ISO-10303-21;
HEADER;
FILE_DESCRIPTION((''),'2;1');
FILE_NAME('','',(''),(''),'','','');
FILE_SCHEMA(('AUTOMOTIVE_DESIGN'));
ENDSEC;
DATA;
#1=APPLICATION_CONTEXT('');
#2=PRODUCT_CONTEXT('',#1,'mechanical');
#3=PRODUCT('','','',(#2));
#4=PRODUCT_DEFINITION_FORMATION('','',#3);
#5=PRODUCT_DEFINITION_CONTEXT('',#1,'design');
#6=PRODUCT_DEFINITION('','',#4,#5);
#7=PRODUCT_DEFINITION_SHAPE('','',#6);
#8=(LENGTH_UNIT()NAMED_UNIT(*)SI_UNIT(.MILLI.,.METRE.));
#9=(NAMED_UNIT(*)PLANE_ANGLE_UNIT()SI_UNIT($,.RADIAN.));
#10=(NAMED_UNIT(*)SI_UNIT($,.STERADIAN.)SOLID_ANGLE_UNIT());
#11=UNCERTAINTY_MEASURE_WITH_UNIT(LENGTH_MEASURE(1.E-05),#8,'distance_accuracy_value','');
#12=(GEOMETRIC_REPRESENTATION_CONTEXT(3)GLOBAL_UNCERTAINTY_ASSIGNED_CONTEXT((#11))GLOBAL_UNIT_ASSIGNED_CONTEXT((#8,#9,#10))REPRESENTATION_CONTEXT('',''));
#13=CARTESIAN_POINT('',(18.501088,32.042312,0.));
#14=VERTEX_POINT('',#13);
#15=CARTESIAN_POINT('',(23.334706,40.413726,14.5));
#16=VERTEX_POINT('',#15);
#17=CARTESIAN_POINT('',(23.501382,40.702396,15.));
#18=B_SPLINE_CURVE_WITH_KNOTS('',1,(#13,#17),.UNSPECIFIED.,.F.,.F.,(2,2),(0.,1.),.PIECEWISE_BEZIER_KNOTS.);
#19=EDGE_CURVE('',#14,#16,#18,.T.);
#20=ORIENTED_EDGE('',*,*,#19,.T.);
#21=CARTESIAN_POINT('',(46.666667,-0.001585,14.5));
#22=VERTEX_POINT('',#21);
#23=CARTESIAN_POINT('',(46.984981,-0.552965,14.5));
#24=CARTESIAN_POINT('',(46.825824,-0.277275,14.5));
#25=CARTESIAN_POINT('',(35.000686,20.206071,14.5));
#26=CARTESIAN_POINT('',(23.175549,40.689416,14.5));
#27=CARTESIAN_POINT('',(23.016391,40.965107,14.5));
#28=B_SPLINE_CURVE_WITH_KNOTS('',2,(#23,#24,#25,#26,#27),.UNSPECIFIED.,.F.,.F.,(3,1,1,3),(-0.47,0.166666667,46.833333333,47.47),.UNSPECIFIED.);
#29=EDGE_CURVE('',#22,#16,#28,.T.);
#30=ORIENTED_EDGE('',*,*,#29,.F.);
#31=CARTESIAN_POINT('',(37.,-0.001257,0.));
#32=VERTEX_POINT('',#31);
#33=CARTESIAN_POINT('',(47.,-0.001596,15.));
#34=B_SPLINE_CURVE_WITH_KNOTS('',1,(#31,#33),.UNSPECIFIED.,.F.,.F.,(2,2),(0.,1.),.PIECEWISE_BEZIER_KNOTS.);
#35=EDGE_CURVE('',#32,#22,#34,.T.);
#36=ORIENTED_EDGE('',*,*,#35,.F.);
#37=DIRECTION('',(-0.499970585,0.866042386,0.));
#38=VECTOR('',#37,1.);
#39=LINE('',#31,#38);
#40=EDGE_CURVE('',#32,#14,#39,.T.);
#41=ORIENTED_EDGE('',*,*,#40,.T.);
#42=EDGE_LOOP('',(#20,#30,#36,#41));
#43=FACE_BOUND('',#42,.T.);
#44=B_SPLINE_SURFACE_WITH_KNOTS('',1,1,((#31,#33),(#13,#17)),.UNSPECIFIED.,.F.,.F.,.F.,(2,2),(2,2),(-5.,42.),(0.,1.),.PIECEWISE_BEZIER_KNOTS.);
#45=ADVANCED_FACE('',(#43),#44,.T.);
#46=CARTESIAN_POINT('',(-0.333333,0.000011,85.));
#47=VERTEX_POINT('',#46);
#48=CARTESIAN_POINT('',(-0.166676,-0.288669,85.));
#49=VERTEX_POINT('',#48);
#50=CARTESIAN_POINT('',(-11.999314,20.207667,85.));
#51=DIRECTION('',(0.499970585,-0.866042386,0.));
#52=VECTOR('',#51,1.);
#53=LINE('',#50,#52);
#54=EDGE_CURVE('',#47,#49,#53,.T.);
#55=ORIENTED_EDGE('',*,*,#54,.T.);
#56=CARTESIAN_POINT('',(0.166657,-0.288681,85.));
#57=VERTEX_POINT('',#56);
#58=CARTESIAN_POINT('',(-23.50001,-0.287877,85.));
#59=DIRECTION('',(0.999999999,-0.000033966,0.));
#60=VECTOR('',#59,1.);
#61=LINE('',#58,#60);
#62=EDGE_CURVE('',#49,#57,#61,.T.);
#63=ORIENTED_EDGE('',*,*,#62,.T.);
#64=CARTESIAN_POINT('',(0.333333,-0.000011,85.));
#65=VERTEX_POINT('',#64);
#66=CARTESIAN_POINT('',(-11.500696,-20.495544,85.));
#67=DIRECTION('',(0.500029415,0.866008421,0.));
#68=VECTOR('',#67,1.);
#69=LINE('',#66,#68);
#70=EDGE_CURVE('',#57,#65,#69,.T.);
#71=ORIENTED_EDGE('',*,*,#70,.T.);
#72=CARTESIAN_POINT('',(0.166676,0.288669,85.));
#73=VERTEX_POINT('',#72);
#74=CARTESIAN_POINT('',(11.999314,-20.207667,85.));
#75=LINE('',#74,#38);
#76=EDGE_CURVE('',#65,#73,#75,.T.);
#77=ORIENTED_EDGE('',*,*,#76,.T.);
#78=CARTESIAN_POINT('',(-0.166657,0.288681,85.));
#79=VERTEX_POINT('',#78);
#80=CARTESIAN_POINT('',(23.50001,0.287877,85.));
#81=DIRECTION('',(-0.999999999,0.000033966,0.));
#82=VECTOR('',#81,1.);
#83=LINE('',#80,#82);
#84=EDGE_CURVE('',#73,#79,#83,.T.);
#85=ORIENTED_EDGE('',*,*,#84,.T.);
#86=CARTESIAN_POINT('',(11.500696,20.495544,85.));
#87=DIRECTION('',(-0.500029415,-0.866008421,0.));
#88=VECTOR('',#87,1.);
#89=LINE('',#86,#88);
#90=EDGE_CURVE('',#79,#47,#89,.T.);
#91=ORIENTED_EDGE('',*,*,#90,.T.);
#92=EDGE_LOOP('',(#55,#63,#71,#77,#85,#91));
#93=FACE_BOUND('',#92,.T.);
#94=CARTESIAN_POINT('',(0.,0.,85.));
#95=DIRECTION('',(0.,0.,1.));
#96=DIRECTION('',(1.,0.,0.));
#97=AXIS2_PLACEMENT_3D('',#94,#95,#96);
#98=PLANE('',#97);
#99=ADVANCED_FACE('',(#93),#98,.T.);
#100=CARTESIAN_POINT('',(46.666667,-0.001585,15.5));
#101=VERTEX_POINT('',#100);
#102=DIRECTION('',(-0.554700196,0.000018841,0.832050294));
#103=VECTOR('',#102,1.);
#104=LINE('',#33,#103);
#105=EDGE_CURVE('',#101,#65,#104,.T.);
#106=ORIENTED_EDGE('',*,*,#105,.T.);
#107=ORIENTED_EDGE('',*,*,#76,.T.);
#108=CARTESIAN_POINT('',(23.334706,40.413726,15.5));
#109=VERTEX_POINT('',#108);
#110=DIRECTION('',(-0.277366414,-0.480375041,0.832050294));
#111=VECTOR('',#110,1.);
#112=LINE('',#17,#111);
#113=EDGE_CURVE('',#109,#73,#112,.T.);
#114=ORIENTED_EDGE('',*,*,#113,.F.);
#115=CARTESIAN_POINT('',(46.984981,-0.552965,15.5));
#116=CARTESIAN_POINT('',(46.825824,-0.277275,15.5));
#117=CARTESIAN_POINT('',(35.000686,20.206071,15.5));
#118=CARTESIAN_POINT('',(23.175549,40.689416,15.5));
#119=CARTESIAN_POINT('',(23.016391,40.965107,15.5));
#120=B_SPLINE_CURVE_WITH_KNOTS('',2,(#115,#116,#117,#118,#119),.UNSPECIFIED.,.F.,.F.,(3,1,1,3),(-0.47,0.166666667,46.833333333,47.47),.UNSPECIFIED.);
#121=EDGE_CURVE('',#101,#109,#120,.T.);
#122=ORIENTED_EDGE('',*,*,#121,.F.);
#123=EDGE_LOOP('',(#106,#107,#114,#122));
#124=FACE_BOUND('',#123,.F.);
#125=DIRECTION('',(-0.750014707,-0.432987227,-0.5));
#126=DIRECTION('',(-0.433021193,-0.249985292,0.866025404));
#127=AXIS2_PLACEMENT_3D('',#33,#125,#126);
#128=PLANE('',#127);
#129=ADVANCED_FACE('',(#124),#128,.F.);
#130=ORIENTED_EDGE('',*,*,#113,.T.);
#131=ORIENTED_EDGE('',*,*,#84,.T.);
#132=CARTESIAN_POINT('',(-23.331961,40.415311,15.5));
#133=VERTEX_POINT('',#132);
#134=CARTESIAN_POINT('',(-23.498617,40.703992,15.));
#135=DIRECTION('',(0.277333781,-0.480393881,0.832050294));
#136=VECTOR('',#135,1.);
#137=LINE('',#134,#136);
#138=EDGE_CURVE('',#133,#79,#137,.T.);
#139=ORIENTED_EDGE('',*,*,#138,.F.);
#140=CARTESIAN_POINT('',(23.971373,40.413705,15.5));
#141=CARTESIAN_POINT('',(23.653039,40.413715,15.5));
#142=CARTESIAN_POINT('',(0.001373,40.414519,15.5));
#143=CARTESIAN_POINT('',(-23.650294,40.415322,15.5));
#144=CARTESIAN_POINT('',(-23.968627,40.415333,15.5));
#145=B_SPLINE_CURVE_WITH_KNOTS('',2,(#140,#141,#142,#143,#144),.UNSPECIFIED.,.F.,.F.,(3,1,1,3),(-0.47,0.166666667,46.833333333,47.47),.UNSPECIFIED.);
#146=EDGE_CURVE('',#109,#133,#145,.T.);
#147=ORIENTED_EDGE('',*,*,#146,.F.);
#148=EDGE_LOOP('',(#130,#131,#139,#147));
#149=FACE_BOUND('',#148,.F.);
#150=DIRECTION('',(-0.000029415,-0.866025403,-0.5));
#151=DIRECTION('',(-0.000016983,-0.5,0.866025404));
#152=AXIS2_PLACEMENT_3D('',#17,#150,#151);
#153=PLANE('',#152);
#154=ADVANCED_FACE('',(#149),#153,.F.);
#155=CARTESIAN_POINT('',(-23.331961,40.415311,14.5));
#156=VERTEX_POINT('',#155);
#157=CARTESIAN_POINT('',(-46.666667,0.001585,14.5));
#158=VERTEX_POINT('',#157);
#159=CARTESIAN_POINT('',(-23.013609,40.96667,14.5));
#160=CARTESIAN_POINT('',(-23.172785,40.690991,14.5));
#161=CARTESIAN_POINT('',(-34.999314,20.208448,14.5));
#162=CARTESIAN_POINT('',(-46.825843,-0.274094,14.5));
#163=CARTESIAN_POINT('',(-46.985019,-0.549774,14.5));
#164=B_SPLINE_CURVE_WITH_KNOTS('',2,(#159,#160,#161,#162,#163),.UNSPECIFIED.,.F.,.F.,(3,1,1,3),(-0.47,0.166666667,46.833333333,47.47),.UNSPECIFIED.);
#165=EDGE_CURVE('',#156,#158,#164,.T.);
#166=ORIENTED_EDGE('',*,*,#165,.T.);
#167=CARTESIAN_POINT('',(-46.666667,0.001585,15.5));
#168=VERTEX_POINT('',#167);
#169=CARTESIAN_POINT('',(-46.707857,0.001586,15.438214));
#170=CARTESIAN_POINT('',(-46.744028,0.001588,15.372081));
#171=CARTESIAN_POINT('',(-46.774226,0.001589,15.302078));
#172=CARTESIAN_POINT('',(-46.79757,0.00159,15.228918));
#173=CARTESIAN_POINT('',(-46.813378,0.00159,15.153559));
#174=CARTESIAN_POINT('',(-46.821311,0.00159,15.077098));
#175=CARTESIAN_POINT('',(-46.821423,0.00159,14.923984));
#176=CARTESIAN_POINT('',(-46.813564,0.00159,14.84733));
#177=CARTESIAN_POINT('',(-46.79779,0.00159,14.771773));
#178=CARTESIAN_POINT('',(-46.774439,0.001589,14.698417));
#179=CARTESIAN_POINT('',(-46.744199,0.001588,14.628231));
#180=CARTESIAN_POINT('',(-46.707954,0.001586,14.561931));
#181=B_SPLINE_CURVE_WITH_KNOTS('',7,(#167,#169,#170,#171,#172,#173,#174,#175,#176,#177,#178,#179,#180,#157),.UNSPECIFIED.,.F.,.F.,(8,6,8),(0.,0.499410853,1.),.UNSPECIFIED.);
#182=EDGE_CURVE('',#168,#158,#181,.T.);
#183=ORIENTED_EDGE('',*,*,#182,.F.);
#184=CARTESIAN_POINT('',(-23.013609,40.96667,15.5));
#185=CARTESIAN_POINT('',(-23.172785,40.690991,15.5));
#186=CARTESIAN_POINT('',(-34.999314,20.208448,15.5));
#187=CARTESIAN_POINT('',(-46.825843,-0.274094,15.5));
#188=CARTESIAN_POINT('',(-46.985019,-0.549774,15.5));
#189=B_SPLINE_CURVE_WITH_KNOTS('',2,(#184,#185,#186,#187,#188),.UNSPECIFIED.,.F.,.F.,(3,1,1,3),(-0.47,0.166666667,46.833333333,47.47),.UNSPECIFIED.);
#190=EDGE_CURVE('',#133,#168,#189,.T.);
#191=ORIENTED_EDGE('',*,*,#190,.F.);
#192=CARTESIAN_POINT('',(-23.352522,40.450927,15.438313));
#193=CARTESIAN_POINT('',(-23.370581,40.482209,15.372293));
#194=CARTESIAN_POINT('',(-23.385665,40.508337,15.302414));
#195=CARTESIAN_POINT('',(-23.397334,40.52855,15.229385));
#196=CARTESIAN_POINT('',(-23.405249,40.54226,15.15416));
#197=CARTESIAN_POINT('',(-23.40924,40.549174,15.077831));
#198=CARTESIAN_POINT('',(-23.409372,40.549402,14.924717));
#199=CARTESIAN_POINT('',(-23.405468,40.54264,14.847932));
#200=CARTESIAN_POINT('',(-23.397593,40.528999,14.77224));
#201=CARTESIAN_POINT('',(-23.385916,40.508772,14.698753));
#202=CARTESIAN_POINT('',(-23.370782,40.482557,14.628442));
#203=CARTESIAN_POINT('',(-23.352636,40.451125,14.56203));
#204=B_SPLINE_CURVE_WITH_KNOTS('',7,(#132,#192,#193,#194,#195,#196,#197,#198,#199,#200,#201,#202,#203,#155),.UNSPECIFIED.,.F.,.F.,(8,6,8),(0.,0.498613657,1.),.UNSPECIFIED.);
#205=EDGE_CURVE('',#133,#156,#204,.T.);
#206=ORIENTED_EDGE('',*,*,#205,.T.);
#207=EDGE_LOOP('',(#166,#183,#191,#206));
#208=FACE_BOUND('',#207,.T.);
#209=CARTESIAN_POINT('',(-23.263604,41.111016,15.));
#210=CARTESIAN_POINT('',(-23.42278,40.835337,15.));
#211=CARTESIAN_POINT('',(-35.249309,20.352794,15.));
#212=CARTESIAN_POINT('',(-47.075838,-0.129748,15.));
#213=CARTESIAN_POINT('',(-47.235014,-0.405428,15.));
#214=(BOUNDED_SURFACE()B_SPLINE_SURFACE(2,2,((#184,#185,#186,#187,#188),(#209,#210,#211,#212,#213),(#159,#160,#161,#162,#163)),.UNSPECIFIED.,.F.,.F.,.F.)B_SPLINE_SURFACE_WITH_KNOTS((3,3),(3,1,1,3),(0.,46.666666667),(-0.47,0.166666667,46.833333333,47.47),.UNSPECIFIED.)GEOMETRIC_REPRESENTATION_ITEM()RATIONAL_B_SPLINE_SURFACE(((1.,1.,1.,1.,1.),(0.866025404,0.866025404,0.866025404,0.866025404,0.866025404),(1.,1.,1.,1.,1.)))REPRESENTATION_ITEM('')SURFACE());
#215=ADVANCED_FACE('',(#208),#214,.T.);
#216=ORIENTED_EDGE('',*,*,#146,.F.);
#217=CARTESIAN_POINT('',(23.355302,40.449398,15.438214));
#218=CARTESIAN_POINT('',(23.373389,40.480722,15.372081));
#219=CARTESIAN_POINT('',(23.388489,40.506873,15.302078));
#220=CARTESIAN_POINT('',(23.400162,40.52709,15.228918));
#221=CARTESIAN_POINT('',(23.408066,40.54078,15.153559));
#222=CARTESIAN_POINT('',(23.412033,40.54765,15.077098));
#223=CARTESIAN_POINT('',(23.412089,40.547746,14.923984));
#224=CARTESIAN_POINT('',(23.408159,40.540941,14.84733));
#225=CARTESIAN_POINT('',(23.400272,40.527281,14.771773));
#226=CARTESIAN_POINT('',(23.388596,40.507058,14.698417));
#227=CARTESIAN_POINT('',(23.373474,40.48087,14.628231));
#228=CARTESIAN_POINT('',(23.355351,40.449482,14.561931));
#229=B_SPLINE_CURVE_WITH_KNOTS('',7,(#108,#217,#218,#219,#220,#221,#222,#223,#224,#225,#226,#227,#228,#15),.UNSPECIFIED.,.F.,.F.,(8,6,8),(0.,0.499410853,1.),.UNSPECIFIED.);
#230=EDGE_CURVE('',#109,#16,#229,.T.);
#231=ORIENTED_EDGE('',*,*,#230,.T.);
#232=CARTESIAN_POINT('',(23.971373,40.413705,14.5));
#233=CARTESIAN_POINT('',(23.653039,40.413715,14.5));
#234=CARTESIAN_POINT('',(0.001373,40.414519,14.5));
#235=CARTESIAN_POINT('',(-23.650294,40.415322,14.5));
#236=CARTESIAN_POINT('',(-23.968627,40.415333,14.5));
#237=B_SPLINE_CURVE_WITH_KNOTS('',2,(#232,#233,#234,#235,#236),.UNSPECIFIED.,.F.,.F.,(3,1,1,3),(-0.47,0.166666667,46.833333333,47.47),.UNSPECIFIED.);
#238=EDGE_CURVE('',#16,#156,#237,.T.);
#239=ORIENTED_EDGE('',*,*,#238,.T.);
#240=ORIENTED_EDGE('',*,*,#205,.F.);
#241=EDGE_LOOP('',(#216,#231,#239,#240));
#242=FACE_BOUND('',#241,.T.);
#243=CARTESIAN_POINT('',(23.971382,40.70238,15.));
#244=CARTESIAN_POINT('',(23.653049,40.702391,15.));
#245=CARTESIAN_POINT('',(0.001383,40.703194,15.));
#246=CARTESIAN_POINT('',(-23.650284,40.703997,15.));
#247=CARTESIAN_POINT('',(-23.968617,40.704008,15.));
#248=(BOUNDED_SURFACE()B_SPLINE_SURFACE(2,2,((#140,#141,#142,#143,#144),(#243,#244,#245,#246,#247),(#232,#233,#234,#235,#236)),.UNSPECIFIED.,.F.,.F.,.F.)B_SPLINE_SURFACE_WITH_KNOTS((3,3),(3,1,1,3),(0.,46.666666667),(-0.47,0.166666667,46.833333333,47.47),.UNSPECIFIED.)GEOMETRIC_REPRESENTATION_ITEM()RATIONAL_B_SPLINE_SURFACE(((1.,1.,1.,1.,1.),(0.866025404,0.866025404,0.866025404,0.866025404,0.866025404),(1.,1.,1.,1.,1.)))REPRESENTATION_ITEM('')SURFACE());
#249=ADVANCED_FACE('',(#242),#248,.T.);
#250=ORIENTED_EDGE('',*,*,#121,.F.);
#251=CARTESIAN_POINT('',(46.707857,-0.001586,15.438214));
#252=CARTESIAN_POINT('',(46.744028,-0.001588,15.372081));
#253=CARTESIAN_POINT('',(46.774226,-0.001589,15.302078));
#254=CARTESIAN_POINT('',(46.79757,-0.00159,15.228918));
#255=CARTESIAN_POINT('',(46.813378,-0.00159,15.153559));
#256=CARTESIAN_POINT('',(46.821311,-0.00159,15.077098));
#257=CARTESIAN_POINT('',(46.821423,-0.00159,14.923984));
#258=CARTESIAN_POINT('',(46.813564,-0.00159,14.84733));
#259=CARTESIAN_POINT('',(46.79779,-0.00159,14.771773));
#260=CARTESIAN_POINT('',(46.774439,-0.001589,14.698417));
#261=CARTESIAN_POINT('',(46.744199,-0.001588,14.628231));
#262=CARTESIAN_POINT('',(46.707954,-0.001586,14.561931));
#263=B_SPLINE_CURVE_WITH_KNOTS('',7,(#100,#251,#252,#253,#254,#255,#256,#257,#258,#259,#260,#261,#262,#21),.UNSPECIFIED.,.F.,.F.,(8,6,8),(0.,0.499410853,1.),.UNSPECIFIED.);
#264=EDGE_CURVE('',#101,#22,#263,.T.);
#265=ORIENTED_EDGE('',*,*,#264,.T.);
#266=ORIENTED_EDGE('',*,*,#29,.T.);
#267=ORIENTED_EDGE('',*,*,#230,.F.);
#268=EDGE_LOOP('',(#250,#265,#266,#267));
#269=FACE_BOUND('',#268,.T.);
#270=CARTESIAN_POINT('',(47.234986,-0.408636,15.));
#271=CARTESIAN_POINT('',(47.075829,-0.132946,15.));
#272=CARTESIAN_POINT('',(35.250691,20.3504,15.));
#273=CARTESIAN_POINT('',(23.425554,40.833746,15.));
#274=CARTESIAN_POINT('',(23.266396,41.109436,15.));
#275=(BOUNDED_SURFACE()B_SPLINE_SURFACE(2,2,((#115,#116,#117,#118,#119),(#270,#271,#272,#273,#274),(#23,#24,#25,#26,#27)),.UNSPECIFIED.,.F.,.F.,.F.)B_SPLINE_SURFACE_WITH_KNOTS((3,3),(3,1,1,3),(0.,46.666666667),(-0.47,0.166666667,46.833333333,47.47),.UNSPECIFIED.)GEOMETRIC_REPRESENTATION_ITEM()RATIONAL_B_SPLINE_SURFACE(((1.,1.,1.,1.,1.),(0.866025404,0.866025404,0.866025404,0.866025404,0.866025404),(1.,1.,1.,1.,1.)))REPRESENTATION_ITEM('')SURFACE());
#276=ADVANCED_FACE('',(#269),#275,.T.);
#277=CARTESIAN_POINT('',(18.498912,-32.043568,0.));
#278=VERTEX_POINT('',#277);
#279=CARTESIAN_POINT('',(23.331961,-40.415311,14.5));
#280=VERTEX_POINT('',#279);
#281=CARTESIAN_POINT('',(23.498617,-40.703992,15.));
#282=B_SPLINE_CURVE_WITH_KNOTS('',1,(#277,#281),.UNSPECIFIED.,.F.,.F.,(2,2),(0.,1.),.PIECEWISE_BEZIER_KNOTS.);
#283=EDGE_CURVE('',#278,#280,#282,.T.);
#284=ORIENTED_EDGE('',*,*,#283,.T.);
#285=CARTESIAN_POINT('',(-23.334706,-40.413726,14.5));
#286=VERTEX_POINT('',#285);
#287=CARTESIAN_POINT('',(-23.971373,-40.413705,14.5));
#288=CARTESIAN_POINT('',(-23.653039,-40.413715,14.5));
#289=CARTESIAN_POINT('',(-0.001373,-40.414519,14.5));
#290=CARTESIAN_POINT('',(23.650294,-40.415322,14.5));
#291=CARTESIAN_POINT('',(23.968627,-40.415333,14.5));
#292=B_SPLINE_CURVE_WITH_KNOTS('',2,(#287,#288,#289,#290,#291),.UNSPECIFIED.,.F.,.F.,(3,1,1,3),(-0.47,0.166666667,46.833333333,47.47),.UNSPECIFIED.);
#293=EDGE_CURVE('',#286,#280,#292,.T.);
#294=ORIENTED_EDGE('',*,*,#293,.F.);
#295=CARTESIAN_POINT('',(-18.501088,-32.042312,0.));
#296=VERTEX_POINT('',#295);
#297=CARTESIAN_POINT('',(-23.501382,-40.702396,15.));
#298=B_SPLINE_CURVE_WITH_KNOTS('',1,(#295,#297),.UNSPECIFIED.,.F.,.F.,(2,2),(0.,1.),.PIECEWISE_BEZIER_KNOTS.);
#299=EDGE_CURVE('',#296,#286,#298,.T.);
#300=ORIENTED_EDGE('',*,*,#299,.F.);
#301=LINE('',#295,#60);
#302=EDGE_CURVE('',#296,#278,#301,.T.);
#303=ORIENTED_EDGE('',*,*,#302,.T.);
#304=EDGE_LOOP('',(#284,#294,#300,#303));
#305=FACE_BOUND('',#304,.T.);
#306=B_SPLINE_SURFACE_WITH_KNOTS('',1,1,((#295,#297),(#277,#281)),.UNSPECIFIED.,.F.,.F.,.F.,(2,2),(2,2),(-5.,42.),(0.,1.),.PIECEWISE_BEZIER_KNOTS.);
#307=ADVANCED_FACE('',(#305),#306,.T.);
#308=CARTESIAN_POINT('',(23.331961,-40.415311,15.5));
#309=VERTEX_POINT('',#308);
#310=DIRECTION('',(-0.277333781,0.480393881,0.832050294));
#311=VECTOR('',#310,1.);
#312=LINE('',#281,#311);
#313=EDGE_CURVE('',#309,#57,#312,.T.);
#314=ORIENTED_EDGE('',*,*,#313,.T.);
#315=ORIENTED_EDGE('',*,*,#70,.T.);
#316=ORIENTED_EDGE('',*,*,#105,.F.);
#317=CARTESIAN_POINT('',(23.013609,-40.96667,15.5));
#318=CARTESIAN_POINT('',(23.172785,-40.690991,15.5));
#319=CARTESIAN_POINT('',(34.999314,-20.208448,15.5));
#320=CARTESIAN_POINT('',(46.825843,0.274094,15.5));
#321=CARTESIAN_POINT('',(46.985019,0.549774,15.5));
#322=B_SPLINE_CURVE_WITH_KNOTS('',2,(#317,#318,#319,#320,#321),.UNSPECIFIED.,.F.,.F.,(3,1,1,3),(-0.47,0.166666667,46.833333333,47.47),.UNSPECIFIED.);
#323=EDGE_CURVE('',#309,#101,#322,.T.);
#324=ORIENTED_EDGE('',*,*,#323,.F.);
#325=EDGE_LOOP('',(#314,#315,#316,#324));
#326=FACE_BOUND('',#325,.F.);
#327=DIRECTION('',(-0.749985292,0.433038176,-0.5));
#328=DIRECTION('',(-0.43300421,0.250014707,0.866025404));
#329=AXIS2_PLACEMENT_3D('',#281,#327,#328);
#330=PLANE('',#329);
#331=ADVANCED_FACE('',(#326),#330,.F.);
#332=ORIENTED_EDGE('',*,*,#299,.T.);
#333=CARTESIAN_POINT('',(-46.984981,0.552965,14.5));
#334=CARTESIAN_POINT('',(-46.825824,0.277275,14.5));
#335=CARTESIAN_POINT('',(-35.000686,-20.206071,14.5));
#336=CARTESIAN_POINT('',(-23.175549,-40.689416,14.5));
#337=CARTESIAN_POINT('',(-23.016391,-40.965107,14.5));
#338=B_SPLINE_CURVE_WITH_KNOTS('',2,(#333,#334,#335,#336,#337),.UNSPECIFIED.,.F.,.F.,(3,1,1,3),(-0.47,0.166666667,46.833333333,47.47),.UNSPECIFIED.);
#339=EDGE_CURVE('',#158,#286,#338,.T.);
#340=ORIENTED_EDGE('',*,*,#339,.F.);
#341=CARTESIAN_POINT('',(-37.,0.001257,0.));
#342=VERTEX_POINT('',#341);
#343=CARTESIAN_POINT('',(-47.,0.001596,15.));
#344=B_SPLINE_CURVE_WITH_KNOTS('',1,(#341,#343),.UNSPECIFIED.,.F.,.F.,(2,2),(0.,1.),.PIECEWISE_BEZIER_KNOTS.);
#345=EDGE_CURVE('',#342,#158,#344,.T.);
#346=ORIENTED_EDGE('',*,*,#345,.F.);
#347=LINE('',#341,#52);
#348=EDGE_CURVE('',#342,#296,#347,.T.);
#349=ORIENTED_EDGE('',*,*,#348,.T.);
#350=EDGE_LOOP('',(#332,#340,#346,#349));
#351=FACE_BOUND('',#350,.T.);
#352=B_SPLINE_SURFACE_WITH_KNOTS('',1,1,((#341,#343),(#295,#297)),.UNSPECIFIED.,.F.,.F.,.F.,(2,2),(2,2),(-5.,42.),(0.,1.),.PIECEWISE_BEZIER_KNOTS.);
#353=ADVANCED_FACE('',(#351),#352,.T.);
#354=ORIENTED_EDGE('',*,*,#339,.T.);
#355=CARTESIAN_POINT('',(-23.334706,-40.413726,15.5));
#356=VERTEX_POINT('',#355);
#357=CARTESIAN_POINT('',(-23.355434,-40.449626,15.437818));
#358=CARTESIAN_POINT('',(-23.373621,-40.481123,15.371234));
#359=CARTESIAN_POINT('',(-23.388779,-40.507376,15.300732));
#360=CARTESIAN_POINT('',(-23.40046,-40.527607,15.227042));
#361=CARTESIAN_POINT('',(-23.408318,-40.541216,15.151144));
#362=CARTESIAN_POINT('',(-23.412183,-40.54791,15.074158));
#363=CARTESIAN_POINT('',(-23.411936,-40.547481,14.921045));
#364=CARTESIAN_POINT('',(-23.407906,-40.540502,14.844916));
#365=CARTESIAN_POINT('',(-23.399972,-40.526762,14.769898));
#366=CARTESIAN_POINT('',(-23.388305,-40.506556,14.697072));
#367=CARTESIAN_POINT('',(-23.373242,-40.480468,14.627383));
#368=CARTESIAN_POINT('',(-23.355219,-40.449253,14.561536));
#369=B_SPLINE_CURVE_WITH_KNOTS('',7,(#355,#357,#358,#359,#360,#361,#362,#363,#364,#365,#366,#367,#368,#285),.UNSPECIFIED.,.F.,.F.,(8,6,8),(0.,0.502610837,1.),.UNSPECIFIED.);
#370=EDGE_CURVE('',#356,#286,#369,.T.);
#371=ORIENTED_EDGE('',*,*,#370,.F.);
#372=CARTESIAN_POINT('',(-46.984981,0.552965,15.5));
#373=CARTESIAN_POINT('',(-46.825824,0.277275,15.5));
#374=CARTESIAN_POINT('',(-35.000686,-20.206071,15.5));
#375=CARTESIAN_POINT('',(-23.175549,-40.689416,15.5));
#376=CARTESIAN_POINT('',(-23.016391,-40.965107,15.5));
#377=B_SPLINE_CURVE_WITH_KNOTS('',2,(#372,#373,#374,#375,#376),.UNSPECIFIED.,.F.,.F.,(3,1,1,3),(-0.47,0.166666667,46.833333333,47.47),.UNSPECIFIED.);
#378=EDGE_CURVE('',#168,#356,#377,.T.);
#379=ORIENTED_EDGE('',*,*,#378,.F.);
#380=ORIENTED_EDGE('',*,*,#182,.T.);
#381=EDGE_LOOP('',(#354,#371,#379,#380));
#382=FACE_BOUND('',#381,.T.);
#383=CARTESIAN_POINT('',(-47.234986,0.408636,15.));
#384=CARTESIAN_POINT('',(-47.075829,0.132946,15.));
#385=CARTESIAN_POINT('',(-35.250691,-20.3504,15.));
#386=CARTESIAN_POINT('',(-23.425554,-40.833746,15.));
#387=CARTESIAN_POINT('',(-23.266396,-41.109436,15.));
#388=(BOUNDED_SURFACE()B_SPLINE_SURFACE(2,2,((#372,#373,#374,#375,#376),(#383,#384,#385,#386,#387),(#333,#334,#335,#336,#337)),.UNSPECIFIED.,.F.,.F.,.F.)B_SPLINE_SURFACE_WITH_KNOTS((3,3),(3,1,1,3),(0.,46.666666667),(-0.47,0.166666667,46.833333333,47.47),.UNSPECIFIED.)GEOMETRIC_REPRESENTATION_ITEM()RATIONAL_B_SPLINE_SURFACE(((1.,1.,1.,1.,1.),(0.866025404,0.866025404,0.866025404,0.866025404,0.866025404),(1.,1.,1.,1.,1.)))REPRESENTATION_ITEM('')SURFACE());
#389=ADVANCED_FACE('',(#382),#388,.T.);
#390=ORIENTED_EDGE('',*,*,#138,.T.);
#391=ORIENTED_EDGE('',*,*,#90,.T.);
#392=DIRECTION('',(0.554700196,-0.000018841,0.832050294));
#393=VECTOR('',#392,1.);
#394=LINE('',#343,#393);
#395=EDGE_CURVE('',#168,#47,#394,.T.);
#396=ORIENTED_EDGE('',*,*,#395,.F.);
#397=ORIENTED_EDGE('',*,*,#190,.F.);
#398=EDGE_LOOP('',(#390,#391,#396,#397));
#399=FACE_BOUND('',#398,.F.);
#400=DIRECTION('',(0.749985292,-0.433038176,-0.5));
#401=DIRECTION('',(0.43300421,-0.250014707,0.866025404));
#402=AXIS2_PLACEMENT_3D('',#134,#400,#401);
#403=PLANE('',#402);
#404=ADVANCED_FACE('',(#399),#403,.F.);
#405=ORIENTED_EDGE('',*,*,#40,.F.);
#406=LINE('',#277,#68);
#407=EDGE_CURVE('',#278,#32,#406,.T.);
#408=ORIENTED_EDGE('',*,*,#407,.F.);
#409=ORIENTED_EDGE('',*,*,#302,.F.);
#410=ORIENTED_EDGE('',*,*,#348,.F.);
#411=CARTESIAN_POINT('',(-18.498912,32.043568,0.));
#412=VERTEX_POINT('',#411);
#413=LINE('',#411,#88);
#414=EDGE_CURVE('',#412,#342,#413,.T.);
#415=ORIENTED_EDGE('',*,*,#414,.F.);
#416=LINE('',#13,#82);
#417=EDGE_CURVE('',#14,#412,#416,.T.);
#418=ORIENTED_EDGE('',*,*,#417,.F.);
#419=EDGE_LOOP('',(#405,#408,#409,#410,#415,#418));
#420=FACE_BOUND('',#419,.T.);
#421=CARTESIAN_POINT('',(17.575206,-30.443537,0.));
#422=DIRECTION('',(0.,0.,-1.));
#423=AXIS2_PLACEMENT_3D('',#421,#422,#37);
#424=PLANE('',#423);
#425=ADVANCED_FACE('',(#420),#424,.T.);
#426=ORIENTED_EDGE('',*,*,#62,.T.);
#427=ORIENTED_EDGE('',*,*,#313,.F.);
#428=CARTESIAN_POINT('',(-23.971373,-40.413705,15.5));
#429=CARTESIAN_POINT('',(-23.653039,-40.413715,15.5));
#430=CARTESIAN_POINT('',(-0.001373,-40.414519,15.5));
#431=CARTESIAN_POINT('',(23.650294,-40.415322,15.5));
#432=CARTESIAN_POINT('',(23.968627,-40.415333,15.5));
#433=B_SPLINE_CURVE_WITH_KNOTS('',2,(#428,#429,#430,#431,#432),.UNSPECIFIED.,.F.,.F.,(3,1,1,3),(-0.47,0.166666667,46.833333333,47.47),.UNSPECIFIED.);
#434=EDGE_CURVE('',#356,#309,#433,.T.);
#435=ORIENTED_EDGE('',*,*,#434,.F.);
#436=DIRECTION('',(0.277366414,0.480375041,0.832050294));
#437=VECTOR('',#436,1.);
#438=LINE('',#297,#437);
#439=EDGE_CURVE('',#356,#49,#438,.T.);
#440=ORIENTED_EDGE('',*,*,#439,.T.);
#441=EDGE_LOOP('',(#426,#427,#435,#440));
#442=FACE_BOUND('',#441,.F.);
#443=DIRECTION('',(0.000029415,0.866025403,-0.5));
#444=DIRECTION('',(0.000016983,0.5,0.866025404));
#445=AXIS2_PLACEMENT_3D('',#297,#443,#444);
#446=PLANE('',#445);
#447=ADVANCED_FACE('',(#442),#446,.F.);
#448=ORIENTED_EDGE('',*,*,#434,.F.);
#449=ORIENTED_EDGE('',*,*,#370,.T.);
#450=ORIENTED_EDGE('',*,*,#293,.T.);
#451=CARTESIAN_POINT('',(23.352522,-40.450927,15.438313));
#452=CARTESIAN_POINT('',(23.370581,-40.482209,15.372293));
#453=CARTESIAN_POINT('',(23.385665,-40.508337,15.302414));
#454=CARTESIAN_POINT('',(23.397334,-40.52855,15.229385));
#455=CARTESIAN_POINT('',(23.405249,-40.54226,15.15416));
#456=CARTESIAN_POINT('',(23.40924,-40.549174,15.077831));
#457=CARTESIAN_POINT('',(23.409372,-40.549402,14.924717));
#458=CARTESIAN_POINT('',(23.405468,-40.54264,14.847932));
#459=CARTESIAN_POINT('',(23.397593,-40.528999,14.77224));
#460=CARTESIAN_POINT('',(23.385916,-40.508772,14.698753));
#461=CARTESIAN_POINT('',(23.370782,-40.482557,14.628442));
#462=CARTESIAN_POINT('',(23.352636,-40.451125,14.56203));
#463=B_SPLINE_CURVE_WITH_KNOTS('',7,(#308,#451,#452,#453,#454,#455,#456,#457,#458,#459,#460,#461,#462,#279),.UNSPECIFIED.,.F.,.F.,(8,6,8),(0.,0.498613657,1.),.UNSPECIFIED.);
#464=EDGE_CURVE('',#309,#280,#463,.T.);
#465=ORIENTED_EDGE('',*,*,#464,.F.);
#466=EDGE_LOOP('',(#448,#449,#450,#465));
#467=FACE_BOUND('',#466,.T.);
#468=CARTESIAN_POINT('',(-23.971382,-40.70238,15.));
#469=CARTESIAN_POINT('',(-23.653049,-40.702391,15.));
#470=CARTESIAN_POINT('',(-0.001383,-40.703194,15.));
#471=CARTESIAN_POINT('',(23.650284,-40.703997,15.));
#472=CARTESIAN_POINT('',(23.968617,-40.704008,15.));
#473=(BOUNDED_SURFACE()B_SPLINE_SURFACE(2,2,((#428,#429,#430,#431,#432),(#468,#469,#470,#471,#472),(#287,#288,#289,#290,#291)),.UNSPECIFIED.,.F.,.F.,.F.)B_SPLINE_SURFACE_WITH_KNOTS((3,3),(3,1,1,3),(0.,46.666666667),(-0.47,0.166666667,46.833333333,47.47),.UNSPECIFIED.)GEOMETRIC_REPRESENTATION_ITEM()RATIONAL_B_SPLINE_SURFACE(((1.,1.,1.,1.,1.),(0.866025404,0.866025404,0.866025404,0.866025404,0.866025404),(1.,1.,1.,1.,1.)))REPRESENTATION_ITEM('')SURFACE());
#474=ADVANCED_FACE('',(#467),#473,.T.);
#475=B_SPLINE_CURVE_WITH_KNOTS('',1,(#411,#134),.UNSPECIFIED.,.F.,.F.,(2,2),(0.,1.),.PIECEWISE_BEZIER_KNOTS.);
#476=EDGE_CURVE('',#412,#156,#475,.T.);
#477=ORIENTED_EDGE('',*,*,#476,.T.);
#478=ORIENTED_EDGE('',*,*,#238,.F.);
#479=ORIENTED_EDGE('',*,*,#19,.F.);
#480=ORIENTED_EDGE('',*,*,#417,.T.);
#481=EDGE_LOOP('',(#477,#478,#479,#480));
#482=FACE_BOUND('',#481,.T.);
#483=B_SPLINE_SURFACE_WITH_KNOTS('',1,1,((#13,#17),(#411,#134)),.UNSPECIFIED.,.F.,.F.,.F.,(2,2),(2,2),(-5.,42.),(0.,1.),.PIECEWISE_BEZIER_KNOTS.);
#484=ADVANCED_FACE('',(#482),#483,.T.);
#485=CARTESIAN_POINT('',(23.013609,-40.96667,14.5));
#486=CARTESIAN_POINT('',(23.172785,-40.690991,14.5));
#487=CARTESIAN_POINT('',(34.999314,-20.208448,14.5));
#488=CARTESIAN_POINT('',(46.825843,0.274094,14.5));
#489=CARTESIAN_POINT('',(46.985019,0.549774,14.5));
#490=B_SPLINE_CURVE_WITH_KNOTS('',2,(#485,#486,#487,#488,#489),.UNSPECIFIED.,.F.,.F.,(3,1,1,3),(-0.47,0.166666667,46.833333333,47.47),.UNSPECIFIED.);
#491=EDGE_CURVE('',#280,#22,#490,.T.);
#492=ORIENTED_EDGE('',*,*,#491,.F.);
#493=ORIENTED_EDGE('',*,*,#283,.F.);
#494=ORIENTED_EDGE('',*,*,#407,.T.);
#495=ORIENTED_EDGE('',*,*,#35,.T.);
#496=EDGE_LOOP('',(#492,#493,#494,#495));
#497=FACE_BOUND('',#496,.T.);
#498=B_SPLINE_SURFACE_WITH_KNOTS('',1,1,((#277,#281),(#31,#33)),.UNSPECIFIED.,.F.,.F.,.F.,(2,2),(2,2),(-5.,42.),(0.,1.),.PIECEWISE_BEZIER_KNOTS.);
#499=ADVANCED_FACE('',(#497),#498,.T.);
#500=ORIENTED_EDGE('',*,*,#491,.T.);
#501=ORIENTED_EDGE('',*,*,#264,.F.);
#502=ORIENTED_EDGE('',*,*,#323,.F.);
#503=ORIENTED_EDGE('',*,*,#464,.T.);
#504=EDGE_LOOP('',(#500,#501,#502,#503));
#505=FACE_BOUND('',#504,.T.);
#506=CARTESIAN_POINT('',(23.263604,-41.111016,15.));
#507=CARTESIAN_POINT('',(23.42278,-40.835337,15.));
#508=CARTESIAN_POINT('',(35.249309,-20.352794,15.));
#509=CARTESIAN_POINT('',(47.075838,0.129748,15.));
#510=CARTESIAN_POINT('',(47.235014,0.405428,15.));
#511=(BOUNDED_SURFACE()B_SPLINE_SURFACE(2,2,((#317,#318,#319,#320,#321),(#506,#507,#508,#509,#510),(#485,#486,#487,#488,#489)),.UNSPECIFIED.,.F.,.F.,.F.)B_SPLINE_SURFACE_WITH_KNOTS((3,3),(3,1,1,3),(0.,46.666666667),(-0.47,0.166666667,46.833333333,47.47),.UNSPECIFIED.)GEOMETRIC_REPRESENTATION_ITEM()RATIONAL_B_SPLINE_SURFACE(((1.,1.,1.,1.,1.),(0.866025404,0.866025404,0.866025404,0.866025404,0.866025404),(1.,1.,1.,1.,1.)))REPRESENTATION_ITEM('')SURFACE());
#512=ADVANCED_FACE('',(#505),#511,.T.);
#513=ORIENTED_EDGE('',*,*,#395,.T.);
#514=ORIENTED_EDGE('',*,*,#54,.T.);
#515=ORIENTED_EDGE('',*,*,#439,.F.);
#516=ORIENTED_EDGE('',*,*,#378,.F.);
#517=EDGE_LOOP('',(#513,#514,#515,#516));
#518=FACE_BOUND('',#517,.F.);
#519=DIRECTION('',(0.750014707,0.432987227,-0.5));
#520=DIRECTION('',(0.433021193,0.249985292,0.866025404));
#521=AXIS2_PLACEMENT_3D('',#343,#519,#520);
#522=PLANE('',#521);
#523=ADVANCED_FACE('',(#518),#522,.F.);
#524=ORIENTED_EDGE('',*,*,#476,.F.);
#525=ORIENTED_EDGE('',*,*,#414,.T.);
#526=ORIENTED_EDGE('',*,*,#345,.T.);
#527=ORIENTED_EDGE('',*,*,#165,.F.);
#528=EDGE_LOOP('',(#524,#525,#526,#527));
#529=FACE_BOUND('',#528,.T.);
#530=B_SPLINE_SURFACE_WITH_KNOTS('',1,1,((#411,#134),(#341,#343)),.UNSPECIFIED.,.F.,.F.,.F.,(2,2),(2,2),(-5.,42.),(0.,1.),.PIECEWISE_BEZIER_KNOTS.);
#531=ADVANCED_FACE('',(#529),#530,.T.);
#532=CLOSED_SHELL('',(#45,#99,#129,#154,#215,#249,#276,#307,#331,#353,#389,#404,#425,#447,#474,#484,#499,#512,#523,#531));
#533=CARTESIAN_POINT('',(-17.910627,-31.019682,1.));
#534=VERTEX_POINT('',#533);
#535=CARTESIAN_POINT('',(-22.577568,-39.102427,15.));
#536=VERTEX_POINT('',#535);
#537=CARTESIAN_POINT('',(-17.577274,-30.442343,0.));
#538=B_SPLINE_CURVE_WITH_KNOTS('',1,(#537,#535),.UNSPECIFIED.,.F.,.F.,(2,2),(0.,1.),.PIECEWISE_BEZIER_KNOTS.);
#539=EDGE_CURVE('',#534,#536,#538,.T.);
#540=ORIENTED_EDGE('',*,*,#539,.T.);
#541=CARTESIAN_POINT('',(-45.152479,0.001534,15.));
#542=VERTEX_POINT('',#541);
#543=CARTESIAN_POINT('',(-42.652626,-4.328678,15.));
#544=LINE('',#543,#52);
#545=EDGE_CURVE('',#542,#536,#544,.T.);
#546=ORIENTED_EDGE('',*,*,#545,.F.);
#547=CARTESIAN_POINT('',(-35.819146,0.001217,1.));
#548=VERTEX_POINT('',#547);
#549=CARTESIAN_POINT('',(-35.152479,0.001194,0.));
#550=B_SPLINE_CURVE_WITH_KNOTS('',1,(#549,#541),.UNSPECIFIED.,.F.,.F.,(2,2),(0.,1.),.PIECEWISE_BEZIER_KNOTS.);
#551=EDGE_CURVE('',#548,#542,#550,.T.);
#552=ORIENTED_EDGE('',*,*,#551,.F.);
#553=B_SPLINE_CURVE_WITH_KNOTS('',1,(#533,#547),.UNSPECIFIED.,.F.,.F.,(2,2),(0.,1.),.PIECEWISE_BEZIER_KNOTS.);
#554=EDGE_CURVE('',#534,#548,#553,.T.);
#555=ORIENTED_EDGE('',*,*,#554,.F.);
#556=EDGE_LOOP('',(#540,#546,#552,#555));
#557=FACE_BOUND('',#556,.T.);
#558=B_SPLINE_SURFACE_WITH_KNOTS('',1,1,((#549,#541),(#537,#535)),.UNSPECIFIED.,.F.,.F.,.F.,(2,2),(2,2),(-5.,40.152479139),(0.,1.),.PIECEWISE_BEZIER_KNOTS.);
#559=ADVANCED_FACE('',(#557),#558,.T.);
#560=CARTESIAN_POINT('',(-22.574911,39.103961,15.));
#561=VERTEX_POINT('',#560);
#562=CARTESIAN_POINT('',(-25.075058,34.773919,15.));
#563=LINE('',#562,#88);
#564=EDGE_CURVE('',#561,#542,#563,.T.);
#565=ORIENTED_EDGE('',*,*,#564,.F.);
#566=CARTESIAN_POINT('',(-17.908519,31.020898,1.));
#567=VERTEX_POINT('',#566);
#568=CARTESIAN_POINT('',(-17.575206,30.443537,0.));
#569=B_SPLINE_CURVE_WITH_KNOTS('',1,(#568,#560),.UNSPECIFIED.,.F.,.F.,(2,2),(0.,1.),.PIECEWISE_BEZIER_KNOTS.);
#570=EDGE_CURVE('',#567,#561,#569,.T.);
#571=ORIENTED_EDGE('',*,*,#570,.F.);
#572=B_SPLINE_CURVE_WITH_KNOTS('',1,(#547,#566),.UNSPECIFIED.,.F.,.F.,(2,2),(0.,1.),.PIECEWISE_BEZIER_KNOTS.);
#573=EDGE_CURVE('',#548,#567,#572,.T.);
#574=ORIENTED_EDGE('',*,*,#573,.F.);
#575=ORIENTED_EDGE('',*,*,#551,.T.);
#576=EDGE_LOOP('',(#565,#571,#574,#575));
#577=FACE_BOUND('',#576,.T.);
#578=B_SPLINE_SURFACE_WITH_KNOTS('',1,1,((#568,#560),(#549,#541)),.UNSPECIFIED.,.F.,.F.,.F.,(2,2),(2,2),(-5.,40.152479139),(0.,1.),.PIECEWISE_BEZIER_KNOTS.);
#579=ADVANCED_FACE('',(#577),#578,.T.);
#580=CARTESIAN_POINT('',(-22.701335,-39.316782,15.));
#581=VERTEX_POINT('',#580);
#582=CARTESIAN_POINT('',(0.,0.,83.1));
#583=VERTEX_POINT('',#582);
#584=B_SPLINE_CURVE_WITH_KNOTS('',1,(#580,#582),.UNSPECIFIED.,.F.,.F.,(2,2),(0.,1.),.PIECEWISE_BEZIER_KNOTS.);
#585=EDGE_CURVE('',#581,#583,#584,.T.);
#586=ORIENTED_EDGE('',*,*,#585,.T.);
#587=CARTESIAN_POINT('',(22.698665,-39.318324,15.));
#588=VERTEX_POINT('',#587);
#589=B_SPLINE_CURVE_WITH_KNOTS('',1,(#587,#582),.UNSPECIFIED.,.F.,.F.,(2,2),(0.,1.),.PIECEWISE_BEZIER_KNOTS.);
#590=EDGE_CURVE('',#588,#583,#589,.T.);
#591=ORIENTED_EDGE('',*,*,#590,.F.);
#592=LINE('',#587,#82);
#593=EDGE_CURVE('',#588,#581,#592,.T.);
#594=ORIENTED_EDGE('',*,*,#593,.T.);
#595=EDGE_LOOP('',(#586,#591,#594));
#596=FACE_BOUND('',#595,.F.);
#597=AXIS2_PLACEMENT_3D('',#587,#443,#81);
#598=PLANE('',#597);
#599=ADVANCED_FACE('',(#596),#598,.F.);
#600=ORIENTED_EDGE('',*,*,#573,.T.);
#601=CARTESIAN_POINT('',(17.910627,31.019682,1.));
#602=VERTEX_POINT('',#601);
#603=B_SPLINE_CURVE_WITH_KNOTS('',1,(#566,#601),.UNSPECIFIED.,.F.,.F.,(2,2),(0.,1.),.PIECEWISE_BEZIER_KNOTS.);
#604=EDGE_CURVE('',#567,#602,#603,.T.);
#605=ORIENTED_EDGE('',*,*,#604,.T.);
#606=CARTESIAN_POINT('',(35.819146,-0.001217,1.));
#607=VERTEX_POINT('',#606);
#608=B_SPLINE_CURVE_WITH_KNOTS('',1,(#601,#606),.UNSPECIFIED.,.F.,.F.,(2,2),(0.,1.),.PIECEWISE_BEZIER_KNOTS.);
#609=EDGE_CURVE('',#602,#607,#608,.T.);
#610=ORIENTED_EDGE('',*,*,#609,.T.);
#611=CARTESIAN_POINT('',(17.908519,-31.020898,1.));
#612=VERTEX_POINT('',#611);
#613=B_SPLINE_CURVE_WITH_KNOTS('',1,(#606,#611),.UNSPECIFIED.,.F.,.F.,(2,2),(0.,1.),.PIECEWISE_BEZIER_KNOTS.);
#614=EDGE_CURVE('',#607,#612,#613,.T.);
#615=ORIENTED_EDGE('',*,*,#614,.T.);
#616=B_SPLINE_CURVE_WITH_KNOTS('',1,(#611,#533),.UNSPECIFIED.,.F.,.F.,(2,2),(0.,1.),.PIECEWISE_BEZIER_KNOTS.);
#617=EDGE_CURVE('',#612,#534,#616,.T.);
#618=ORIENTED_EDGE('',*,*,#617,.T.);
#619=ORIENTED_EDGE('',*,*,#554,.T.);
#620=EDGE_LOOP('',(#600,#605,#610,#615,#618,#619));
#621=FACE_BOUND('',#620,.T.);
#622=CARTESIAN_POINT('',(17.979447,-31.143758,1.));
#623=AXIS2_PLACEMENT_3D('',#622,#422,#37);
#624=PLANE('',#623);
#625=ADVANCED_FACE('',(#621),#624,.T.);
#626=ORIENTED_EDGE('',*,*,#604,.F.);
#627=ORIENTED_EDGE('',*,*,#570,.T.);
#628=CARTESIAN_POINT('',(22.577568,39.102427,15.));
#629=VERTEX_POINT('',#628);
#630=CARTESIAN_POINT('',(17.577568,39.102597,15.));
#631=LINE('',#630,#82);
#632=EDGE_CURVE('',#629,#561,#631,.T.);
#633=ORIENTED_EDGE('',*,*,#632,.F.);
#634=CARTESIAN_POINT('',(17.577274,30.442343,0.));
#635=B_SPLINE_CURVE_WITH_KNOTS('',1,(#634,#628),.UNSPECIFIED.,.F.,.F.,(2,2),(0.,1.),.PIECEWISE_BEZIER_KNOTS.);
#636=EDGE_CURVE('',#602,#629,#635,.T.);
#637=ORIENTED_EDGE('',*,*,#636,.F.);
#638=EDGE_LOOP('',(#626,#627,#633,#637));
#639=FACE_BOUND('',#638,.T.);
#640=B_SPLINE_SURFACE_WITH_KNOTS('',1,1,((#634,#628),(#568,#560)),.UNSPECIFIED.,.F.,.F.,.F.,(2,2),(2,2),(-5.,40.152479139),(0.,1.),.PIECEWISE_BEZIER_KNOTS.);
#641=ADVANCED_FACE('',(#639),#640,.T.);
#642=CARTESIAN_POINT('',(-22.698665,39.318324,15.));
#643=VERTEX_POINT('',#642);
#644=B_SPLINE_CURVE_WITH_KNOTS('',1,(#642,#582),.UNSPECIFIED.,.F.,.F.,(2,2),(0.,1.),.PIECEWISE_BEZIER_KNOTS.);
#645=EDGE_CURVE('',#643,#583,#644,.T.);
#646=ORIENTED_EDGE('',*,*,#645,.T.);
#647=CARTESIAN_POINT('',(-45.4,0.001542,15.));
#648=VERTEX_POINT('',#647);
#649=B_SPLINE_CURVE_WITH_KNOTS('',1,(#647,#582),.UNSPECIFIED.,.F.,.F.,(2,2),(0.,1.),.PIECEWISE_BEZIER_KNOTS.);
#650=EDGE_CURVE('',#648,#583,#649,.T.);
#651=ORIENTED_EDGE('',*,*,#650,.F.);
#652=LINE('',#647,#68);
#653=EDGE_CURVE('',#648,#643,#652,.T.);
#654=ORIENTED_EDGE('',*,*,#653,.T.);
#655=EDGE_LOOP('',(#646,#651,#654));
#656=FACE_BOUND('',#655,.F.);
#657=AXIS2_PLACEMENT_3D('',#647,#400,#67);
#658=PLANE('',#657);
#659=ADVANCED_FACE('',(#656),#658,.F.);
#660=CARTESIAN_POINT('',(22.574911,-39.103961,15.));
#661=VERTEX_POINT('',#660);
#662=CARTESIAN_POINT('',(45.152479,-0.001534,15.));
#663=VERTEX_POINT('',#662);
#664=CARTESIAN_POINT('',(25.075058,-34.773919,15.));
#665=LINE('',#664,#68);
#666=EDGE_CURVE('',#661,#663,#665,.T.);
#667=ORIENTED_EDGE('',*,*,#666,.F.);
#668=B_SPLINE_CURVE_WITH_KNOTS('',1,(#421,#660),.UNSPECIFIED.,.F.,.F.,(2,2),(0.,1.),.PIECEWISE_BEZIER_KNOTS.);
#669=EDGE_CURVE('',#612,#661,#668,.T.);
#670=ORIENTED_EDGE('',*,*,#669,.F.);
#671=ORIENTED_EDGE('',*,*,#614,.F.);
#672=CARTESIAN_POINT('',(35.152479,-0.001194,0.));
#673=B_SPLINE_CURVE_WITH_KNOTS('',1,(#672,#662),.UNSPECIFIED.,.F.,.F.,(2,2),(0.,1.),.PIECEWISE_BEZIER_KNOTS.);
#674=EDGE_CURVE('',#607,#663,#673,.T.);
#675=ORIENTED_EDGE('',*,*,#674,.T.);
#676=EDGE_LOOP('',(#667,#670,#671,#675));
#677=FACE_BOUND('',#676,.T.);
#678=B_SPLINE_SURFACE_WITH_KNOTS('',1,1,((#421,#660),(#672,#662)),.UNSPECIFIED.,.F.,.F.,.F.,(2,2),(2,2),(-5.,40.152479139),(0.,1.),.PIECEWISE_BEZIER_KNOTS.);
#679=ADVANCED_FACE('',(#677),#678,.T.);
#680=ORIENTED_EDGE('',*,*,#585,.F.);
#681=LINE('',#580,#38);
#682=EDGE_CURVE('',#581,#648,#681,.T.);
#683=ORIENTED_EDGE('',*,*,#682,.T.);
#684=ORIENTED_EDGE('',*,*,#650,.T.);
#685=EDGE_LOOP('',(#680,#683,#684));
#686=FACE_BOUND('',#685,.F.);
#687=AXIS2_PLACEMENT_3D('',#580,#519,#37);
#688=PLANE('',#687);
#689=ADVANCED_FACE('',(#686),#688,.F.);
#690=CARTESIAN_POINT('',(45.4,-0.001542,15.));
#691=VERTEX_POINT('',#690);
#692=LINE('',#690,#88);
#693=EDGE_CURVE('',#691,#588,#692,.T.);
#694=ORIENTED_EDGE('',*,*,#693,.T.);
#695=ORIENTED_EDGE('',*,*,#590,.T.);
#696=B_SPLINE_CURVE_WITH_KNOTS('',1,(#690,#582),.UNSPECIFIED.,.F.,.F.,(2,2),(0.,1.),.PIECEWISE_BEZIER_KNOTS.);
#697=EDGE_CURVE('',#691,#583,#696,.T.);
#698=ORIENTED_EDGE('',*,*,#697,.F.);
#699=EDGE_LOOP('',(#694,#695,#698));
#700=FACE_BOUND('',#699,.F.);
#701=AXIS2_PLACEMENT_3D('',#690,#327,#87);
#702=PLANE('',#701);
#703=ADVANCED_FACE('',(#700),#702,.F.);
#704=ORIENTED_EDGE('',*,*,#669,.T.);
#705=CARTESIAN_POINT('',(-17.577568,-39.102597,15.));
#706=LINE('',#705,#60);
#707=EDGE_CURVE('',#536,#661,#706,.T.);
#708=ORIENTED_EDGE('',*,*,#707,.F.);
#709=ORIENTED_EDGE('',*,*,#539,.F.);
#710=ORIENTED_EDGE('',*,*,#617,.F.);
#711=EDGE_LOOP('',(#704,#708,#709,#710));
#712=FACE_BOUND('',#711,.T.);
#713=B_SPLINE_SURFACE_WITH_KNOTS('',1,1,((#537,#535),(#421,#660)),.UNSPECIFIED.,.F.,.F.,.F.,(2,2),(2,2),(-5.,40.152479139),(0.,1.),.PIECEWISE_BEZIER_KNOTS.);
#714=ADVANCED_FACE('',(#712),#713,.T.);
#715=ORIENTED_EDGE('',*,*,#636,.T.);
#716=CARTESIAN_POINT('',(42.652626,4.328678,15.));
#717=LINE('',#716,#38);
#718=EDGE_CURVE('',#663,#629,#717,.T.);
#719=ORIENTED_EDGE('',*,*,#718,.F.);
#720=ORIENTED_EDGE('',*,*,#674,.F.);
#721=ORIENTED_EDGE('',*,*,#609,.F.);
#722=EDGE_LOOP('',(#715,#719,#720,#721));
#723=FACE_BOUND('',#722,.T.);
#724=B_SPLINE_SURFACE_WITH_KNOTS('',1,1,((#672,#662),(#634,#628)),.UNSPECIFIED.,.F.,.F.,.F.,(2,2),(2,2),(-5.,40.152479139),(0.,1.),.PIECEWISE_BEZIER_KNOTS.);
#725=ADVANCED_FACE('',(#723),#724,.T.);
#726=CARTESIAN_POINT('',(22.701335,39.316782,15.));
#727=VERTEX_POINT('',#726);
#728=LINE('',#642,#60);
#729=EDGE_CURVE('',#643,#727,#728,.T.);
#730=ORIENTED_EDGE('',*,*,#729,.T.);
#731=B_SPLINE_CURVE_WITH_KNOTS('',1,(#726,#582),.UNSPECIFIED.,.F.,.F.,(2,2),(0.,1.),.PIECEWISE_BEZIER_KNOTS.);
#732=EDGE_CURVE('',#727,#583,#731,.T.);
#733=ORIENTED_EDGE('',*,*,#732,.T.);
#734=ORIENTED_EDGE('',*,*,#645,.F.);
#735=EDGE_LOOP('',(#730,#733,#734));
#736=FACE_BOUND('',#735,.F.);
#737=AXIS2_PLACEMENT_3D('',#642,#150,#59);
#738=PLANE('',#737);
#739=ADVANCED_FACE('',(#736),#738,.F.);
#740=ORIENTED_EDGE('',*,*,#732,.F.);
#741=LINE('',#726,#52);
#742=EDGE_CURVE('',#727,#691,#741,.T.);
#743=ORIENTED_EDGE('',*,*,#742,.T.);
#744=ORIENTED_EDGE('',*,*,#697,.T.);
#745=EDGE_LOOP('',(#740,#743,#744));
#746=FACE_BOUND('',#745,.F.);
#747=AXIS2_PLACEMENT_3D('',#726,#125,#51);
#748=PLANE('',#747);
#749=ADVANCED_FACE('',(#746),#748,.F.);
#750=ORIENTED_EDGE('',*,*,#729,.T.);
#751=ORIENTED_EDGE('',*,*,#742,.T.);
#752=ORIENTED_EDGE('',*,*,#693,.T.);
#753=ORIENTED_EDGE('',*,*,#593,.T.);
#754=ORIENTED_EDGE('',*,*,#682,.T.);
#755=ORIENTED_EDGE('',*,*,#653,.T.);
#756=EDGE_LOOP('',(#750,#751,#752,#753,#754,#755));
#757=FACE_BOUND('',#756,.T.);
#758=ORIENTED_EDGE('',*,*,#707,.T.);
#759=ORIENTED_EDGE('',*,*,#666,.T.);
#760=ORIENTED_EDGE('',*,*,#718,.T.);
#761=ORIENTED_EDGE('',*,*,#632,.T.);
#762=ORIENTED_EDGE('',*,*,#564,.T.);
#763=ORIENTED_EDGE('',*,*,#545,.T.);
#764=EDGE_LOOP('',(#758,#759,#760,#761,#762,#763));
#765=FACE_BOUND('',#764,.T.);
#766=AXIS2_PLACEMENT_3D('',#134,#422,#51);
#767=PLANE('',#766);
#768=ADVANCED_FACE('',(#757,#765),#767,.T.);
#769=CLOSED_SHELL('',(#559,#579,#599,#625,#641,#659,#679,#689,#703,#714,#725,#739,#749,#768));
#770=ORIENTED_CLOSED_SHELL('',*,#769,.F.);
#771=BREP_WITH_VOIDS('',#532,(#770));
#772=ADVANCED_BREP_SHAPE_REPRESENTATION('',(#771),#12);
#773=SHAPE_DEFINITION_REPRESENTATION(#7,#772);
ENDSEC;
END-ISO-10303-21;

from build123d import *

# Parameters (mm, degrees)
F1_DEPTH = 15
F1_TAPER = -30
F2_DEPTH = 15
F2_TAPER = -30
F3_DEPTH = 1
F3_TAPER = -35
F5_DEPTH = 70
F5_TAPER = 30
F9_R     = 1


# Not quite as in the source:
# - an extrude whose draft closes it to a point is written as a loft to that point


with BuildPart() as f1:
    # F0 (on Top) → F1 (new body)
    with BuildSketch(Plane.XY):
        Polygon((-18.4989116336, 32.043568284), (-36.9999999787, 0.0012567249), (-18.501088345, -32.0423115591), (18.4989116336, -32.043568284), (36.9999999787, -0.0012567249), (18.501088345, 32.0423115591), align=None)
        Polygon((17.57727357, 30.442342936), (35.1524791183, -0.0011939729), (17.5752055483, -30.4435369089), (-17.57727357, -30.442342936), (-35.1524791183, 0.0011939729), (-17.5752055483, 30.4435369089), align=None, mode=Mode.SUBTRACT)
    extrude(amount=F1_DEPTH, taper=F1_TAPER)

    # F0 (on Top) → F2 (cut)
    with BuildSketch(Plane.XY):
        Polygon((17.5752055483, -30.4435369089), (35.1524791183, -0.0011939729), (17.57727357, 30.442342936), (-17.5752055483, 30.4435369089), (-35.1524791183, 0.0011939729), (-17.57727357, -30.442342936), align=None)
    extrude(amount=F2_DEPTH, taper=F2_TAPER, mode=Mode.SUBTRACT)

    # F0 (on Top) → F3 (join)
    with BuildSketch(Plane.XY):
        Polygon((17.5752055483, -30.4435369089), (35.1524791183, -0.0011939729), (17.57727357, 30.442342936), (-17.5752055483, 30.4435369089), (-35.1524791183, 0.0011939729), (-17.57727357, -30.442342936), align=None)
    extrude(amount=F3_DEPTH, taper=F3_TAPER)


with BuildPart() as f5:
    # F4 (on face) → F5 (new body)
    with BuildSketch(Plane.XY.offset(15)):
        Polygon((23.4986174805, -40.7039921445), (46.9999999729, -0.0015963803), (23.5013824923, 40.7023957642), (-23.4986174805, 40.7039921445), (-46.9999999729, 0.0015963803), (-23.5013824923, -40.7023957642), align=None)
    extrude(amount=F5_DEPTH, taper=F5_TAPER)

    # F6 (on face) → F7 section 0
    with BuildSketch(Plane(origin=(0, 0, 15), x_dir=(1, 0, 0), z_dir=(0, 0, -1)), mode=Mode.PRIVATE) as f7_s0:
        Polygon((45.3999999738, 0.0015420354), (22.698664545, 39.3183243269), (-22.7013354288, 39.3167822914), (-45.3999999738, -0.0015420354), (-22.698664545, -39.3183243269), (22.7013354288, -39.3167822914), align=None)
    loft([f7_s0.sketch, Vertex(0, 0, 83.1)], ruled=True, mode=Mode.SUBTRACT)


with BuildPart() as f1_1:
    add(f1.part)

    # F8: union F5
    add(f5.part)

    # F9
    f9_edges = [f1_1.edges().sort_by_distance(p)[0] for p in [
        (-0.001383, -40.703194, 15),
        (35.249309, -20.352794, 15),
        (35.250691, 20.3504, 15),
        (0.001383, 40.703194, 15),
        (-35.249309, 20.352794, 15),
        (-35.250691, -20.3504, 15),
    ]]
    fillet(f9_edges, radius=F9_R)


solid = f1_1.part
